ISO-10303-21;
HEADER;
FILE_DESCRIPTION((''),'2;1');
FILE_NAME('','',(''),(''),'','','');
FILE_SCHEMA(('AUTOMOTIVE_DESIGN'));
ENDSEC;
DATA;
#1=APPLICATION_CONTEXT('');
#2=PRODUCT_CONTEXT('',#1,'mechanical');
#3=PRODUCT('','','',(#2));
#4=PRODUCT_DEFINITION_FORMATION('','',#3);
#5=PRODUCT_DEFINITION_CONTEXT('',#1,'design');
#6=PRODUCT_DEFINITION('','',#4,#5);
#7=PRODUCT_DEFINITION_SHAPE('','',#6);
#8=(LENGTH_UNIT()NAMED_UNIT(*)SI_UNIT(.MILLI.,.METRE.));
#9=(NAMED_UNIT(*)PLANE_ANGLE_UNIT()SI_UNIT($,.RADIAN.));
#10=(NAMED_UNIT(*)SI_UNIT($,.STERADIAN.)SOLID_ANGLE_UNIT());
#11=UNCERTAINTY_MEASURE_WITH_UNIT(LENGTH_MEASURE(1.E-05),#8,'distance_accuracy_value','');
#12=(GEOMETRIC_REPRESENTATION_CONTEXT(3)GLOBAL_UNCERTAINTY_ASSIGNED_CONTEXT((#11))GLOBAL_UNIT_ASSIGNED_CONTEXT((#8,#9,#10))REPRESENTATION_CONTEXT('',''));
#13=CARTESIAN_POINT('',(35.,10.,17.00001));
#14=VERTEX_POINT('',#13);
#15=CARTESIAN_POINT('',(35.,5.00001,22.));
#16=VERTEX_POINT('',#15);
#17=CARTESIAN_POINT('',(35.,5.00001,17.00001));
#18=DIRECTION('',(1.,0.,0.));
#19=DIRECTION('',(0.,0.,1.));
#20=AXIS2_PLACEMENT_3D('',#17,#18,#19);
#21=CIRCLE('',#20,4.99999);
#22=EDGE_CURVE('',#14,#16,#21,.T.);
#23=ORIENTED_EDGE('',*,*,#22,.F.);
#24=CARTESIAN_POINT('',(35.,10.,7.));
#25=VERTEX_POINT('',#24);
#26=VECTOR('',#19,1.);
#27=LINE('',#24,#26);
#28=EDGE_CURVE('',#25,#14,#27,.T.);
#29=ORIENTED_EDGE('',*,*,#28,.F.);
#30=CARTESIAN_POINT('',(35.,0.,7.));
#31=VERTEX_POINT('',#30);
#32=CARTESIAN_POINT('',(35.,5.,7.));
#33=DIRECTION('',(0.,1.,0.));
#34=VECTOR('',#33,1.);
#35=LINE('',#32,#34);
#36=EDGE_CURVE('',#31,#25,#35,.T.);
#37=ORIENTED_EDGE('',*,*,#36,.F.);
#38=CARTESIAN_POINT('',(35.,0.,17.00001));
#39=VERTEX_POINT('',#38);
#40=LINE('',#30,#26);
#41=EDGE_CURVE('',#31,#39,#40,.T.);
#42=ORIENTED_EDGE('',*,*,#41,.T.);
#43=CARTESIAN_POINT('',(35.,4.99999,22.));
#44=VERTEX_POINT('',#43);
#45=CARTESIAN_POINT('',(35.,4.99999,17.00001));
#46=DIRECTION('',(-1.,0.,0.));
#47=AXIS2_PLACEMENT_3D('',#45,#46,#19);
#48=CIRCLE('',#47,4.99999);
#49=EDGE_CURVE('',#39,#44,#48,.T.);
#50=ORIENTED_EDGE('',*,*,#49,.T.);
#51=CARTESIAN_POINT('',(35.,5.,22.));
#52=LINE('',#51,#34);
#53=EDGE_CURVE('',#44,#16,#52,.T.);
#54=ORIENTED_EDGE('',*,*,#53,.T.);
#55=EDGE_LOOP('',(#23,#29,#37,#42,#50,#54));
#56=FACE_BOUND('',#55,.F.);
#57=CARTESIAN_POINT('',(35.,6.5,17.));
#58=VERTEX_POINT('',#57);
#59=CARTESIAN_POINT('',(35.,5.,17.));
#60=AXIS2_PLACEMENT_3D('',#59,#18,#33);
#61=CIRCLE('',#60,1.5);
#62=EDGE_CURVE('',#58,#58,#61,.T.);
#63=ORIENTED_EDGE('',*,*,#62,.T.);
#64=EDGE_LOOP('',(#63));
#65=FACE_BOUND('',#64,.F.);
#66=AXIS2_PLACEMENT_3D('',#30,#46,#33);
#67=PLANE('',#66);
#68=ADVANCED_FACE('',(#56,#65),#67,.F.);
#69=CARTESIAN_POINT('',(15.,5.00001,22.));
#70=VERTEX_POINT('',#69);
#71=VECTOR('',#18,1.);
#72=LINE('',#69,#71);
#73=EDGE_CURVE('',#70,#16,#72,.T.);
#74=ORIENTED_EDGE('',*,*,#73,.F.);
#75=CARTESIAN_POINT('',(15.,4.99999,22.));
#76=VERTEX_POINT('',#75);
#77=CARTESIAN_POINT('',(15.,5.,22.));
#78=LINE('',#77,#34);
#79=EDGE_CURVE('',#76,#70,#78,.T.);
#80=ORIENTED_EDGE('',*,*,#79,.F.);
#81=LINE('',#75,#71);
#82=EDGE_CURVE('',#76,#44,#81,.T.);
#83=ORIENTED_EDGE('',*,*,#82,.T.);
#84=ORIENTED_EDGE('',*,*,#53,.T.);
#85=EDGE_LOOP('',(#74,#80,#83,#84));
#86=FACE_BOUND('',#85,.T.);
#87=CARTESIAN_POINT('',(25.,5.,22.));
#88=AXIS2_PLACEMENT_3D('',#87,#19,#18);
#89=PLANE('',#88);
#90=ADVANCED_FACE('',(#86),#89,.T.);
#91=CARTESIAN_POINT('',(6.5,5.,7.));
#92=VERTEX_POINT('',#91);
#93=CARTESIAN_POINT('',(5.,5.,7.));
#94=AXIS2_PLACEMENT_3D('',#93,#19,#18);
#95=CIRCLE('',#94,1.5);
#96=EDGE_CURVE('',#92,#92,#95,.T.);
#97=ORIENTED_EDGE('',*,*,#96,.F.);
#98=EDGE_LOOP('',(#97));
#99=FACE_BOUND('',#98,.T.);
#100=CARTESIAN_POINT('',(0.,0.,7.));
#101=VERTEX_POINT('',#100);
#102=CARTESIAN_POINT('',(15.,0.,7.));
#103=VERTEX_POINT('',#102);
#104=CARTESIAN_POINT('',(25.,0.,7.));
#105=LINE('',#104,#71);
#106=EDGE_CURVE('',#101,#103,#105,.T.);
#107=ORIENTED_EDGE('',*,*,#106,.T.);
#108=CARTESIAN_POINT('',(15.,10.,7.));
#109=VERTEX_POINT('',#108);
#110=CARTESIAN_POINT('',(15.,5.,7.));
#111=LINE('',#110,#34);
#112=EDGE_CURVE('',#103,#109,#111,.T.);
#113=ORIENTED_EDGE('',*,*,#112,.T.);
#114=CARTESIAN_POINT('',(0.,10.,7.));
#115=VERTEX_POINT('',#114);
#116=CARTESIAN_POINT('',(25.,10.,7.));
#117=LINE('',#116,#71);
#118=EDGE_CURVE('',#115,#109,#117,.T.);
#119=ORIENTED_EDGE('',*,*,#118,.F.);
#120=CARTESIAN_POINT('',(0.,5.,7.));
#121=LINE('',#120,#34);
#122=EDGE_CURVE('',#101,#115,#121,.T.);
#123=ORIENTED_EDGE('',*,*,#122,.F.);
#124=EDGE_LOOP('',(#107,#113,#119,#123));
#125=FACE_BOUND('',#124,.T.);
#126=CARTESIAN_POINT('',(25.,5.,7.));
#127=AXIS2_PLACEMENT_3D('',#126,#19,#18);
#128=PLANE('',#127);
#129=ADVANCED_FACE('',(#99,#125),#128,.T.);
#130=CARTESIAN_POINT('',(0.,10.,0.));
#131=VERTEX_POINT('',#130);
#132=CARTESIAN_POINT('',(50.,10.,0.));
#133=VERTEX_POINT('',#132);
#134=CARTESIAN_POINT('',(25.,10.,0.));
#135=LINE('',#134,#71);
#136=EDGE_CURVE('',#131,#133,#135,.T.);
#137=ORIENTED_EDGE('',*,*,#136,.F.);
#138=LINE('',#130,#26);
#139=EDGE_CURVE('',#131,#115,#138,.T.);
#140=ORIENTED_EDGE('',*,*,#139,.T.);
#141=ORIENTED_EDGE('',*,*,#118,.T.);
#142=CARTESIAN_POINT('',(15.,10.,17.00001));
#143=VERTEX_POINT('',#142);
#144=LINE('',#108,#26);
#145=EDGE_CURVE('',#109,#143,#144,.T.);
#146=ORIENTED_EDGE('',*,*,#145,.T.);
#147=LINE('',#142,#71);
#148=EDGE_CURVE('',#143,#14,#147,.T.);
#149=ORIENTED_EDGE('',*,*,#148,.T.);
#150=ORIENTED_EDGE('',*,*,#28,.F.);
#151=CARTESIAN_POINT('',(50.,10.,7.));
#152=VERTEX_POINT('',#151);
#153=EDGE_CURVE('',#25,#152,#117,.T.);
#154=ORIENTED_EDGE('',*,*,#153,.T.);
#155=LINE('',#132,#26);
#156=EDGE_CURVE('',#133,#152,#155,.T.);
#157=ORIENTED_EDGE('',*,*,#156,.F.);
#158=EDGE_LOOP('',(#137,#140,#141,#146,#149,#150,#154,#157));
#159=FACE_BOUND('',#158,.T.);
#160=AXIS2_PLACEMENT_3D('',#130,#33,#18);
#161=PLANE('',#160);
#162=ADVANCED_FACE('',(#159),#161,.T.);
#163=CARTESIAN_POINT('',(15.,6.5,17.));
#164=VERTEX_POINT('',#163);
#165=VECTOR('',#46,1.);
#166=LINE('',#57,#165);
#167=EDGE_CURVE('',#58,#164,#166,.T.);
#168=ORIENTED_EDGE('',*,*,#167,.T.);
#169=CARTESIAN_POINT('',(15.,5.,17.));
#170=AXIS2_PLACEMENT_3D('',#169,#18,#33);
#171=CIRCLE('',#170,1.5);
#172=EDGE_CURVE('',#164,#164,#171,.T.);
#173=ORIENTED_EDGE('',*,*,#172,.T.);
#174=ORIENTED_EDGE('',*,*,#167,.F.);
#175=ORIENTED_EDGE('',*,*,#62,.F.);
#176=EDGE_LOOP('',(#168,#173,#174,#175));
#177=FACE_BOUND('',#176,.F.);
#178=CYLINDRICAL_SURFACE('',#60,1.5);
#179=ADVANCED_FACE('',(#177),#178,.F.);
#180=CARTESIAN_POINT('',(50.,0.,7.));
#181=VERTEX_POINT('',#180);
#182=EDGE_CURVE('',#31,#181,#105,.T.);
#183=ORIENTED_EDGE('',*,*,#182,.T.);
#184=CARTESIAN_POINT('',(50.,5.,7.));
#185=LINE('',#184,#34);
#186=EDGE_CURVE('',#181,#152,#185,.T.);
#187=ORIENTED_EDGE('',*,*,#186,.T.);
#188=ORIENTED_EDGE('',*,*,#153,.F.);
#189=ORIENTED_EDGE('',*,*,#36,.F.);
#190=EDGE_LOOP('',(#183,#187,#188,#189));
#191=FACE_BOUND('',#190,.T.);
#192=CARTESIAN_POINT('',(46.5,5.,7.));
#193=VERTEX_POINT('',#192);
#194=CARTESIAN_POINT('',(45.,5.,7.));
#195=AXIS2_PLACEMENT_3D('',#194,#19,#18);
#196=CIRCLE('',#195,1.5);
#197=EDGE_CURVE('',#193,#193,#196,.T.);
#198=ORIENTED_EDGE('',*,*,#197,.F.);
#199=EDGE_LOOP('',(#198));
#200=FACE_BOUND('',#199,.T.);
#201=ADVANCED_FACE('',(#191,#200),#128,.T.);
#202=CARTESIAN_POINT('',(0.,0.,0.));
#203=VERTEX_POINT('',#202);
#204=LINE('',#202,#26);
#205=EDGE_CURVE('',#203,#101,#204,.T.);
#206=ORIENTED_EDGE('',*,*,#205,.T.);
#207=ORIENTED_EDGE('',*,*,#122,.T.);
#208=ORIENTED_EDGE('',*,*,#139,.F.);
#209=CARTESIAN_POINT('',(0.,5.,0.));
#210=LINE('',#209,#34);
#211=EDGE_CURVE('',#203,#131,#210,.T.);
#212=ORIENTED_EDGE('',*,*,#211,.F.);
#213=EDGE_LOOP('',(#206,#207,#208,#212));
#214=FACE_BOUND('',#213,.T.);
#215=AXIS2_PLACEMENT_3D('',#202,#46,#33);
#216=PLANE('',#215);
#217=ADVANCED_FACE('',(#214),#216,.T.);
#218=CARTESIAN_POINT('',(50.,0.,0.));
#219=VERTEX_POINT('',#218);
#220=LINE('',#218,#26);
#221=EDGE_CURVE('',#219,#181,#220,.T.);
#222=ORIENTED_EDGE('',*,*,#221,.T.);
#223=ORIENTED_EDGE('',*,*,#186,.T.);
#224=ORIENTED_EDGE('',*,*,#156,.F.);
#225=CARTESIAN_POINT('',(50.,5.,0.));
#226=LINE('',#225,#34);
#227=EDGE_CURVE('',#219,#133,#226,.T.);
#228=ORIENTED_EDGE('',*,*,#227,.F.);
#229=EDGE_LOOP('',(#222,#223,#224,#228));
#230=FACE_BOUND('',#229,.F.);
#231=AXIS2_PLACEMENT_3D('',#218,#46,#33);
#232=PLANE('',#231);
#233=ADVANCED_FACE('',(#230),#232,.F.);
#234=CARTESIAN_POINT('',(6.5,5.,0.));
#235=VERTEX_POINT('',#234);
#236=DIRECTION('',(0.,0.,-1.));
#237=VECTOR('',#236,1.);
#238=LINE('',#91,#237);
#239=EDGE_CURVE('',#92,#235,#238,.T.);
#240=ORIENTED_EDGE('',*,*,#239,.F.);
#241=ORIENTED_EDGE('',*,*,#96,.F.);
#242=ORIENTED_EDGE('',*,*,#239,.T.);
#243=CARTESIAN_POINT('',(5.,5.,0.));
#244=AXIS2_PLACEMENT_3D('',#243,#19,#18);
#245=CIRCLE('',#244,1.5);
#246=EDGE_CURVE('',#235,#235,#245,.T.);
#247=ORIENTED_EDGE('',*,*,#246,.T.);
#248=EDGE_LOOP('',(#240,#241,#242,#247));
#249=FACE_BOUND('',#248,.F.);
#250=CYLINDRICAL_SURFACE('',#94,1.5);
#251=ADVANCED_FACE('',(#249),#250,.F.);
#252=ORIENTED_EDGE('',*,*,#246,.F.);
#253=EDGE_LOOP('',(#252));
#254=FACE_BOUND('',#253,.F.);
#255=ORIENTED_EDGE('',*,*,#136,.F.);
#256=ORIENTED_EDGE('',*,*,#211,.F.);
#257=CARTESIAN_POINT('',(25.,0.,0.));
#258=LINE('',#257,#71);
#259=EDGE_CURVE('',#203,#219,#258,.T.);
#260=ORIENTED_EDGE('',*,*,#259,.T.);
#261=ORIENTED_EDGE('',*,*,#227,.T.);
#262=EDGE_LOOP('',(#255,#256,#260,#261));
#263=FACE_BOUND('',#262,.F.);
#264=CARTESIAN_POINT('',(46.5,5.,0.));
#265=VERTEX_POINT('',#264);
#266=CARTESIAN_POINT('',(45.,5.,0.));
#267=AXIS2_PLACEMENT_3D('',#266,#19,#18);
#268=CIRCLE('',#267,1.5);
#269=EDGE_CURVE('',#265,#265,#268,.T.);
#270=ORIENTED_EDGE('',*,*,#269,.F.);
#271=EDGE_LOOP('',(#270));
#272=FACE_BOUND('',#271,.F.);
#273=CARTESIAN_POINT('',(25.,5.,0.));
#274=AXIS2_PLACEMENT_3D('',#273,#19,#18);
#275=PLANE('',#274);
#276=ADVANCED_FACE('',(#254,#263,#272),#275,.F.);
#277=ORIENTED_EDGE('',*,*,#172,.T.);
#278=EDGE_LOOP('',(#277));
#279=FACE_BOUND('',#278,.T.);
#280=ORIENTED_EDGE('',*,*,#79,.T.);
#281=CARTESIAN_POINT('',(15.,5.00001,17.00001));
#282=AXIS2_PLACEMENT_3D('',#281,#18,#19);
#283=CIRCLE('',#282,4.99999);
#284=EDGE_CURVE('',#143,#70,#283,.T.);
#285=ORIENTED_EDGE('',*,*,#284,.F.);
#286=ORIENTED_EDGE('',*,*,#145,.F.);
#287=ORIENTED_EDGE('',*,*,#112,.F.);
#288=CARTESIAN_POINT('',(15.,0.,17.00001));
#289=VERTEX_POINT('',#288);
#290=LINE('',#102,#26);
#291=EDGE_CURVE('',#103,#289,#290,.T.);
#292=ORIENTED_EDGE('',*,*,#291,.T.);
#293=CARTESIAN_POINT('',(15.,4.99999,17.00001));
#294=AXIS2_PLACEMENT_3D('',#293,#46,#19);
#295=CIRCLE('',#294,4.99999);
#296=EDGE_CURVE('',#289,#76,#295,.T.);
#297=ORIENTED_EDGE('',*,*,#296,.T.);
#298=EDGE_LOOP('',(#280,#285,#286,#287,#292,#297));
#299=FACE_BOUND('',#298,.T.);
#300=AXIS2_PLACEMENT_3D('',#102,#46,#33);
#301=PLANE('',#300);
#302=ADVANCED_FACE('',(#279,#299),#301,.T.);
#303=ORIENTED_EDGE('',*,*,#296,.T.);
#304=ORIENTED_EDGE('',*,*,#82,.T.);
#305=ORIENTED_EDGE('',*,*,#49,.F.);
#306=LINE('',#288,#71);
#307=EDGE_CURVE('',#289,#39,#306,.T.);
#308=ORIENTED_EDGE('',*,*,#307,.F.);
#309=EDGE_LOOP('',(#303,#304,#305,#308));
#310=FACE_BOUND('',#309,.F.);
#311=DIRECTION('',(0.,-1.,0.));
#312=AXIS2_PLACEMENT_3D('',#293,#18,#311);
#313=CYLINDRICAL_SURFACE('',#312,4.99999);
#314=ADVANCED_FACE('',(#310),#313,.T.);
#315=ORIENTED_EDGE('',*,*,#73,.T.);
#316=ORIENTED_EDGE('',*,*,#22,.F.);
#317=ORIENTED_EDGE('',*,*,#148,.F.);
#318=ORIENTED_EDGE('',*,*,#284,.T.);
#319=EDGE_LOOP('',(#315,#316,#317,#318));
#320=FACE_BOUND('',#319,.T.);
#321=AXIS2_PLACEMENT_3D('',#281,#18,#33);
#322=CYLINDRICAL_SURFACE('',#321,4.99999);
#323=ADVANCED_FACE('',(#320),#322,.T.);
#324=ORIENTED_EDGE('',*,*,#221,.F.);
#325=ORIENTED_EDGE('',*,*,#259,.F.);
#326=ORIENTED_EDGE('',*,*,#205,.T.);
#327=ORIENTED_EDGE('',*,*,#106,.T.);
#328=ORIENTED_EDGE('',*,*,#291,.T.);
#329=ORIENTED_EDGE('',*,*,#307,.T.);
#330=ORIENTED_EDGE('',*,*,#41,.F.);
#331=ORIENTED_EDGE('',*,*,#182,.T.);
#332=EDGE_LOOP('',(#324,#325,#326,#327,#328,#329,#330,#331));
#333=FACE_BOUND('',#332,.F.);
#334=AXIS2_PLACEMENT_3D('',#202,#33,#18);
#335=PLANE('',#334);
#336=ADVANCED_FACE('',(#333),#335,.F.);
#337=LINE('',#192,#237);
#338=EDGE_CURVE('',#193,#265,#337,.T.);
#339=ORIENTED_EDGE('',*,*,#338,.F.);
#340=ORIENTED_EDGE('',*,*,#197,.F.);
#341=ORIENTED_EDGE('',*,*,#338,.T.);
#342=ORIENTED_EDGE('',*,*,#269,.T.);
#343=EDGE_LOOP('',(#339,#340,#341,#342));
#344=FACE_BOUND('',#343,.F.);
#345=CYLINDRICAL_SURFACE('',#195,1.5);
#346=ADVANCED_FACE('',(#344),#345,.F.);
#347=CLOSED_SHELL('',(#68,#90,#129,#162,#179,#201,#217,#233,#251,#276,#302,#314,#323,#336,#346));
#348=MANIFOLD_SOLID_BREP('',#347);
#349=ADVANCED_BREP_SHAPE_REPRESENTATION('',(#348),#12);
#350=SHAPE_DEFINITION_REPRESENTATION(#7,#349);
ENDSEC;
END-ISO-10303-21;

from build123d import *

# Parameters (mm, degrees)
F0_W      = 50
F0_H      = 10
F1_DEPTH  = 7
F2_W      = 20
F2_H      = 10
F4_DEPTH  = 15
F5_R      = 4.99999
F3_R      = 1.5
F6_DEPTH  = 25
F7_R      = 1.5
F8_DEPTH  = 50
F10_W     = 10
F10_H     = 10
F11_DEPTH = 25


# Not quite as in the source:
# - a fillet or chamfer is up to 0.001 mm smaller than in the source, because OpenCascade refuses the exact size


with BuildPart() as f1:
    # F0 (on Top) → F1 (new body)
    with BuildSketch(Plane.XY):
        with Locations((25, 5)):
            Rectangle(F0_W, F0_H)
    extrude(amount=F1_DEPTH)

    # F2 (on face) → F4 (join)
    with BuildSketch(Plane.XY.offset(7)):
        with Locations((25, 5)):
            Rectangle(F2_W, F2_H)
    extrude(amount=F4_DEPTH)

    # F5 (radius 5 in the source; OpenCascade refuses exactly that, so slightly less here)
    f5_edges = [f1.edges().sort_by_distance(p)[0] for p in [
        (25, 10, 22),
        (25, 0, 22),
    ]]
    fillet(f5_edges, radius=F5_R)

    # F3 (on face) → F6 (cut)
    with BuildSketch(Plane.XY.offset(7)):
        with Locations((45, 5)):
            Circle(F3_R)
        with Locations((5, 5)):
            Circle(F3_R)
    extrude(amount=-F6_DEPTH, mode=Mode.SUBTRACT)

    # F7 (on face) → F8 (cut)
    with BuildSketch(Plane.YZ.offset(35)):
        with Locations((5, 17)):
            Circle(F7_R)
    extrude(amount=-F8_DEPTH, mode=Mode.SUBTRACT)


with BuildPart() as f9_1:
    # F9: copy of F1
    add(f1.part.moved(Location((0, 0, 40))))

    # F10 (on face) → F11 (cut)
    with BuildSketch(Plane.XY.offset(47)):
        with Locations((25, 5)):
            Rectangle(F10_W, F10_H)
    extrude(amount=F11_DEPTH, mode=Mode.SUBTRACT)


solid = f1.part
